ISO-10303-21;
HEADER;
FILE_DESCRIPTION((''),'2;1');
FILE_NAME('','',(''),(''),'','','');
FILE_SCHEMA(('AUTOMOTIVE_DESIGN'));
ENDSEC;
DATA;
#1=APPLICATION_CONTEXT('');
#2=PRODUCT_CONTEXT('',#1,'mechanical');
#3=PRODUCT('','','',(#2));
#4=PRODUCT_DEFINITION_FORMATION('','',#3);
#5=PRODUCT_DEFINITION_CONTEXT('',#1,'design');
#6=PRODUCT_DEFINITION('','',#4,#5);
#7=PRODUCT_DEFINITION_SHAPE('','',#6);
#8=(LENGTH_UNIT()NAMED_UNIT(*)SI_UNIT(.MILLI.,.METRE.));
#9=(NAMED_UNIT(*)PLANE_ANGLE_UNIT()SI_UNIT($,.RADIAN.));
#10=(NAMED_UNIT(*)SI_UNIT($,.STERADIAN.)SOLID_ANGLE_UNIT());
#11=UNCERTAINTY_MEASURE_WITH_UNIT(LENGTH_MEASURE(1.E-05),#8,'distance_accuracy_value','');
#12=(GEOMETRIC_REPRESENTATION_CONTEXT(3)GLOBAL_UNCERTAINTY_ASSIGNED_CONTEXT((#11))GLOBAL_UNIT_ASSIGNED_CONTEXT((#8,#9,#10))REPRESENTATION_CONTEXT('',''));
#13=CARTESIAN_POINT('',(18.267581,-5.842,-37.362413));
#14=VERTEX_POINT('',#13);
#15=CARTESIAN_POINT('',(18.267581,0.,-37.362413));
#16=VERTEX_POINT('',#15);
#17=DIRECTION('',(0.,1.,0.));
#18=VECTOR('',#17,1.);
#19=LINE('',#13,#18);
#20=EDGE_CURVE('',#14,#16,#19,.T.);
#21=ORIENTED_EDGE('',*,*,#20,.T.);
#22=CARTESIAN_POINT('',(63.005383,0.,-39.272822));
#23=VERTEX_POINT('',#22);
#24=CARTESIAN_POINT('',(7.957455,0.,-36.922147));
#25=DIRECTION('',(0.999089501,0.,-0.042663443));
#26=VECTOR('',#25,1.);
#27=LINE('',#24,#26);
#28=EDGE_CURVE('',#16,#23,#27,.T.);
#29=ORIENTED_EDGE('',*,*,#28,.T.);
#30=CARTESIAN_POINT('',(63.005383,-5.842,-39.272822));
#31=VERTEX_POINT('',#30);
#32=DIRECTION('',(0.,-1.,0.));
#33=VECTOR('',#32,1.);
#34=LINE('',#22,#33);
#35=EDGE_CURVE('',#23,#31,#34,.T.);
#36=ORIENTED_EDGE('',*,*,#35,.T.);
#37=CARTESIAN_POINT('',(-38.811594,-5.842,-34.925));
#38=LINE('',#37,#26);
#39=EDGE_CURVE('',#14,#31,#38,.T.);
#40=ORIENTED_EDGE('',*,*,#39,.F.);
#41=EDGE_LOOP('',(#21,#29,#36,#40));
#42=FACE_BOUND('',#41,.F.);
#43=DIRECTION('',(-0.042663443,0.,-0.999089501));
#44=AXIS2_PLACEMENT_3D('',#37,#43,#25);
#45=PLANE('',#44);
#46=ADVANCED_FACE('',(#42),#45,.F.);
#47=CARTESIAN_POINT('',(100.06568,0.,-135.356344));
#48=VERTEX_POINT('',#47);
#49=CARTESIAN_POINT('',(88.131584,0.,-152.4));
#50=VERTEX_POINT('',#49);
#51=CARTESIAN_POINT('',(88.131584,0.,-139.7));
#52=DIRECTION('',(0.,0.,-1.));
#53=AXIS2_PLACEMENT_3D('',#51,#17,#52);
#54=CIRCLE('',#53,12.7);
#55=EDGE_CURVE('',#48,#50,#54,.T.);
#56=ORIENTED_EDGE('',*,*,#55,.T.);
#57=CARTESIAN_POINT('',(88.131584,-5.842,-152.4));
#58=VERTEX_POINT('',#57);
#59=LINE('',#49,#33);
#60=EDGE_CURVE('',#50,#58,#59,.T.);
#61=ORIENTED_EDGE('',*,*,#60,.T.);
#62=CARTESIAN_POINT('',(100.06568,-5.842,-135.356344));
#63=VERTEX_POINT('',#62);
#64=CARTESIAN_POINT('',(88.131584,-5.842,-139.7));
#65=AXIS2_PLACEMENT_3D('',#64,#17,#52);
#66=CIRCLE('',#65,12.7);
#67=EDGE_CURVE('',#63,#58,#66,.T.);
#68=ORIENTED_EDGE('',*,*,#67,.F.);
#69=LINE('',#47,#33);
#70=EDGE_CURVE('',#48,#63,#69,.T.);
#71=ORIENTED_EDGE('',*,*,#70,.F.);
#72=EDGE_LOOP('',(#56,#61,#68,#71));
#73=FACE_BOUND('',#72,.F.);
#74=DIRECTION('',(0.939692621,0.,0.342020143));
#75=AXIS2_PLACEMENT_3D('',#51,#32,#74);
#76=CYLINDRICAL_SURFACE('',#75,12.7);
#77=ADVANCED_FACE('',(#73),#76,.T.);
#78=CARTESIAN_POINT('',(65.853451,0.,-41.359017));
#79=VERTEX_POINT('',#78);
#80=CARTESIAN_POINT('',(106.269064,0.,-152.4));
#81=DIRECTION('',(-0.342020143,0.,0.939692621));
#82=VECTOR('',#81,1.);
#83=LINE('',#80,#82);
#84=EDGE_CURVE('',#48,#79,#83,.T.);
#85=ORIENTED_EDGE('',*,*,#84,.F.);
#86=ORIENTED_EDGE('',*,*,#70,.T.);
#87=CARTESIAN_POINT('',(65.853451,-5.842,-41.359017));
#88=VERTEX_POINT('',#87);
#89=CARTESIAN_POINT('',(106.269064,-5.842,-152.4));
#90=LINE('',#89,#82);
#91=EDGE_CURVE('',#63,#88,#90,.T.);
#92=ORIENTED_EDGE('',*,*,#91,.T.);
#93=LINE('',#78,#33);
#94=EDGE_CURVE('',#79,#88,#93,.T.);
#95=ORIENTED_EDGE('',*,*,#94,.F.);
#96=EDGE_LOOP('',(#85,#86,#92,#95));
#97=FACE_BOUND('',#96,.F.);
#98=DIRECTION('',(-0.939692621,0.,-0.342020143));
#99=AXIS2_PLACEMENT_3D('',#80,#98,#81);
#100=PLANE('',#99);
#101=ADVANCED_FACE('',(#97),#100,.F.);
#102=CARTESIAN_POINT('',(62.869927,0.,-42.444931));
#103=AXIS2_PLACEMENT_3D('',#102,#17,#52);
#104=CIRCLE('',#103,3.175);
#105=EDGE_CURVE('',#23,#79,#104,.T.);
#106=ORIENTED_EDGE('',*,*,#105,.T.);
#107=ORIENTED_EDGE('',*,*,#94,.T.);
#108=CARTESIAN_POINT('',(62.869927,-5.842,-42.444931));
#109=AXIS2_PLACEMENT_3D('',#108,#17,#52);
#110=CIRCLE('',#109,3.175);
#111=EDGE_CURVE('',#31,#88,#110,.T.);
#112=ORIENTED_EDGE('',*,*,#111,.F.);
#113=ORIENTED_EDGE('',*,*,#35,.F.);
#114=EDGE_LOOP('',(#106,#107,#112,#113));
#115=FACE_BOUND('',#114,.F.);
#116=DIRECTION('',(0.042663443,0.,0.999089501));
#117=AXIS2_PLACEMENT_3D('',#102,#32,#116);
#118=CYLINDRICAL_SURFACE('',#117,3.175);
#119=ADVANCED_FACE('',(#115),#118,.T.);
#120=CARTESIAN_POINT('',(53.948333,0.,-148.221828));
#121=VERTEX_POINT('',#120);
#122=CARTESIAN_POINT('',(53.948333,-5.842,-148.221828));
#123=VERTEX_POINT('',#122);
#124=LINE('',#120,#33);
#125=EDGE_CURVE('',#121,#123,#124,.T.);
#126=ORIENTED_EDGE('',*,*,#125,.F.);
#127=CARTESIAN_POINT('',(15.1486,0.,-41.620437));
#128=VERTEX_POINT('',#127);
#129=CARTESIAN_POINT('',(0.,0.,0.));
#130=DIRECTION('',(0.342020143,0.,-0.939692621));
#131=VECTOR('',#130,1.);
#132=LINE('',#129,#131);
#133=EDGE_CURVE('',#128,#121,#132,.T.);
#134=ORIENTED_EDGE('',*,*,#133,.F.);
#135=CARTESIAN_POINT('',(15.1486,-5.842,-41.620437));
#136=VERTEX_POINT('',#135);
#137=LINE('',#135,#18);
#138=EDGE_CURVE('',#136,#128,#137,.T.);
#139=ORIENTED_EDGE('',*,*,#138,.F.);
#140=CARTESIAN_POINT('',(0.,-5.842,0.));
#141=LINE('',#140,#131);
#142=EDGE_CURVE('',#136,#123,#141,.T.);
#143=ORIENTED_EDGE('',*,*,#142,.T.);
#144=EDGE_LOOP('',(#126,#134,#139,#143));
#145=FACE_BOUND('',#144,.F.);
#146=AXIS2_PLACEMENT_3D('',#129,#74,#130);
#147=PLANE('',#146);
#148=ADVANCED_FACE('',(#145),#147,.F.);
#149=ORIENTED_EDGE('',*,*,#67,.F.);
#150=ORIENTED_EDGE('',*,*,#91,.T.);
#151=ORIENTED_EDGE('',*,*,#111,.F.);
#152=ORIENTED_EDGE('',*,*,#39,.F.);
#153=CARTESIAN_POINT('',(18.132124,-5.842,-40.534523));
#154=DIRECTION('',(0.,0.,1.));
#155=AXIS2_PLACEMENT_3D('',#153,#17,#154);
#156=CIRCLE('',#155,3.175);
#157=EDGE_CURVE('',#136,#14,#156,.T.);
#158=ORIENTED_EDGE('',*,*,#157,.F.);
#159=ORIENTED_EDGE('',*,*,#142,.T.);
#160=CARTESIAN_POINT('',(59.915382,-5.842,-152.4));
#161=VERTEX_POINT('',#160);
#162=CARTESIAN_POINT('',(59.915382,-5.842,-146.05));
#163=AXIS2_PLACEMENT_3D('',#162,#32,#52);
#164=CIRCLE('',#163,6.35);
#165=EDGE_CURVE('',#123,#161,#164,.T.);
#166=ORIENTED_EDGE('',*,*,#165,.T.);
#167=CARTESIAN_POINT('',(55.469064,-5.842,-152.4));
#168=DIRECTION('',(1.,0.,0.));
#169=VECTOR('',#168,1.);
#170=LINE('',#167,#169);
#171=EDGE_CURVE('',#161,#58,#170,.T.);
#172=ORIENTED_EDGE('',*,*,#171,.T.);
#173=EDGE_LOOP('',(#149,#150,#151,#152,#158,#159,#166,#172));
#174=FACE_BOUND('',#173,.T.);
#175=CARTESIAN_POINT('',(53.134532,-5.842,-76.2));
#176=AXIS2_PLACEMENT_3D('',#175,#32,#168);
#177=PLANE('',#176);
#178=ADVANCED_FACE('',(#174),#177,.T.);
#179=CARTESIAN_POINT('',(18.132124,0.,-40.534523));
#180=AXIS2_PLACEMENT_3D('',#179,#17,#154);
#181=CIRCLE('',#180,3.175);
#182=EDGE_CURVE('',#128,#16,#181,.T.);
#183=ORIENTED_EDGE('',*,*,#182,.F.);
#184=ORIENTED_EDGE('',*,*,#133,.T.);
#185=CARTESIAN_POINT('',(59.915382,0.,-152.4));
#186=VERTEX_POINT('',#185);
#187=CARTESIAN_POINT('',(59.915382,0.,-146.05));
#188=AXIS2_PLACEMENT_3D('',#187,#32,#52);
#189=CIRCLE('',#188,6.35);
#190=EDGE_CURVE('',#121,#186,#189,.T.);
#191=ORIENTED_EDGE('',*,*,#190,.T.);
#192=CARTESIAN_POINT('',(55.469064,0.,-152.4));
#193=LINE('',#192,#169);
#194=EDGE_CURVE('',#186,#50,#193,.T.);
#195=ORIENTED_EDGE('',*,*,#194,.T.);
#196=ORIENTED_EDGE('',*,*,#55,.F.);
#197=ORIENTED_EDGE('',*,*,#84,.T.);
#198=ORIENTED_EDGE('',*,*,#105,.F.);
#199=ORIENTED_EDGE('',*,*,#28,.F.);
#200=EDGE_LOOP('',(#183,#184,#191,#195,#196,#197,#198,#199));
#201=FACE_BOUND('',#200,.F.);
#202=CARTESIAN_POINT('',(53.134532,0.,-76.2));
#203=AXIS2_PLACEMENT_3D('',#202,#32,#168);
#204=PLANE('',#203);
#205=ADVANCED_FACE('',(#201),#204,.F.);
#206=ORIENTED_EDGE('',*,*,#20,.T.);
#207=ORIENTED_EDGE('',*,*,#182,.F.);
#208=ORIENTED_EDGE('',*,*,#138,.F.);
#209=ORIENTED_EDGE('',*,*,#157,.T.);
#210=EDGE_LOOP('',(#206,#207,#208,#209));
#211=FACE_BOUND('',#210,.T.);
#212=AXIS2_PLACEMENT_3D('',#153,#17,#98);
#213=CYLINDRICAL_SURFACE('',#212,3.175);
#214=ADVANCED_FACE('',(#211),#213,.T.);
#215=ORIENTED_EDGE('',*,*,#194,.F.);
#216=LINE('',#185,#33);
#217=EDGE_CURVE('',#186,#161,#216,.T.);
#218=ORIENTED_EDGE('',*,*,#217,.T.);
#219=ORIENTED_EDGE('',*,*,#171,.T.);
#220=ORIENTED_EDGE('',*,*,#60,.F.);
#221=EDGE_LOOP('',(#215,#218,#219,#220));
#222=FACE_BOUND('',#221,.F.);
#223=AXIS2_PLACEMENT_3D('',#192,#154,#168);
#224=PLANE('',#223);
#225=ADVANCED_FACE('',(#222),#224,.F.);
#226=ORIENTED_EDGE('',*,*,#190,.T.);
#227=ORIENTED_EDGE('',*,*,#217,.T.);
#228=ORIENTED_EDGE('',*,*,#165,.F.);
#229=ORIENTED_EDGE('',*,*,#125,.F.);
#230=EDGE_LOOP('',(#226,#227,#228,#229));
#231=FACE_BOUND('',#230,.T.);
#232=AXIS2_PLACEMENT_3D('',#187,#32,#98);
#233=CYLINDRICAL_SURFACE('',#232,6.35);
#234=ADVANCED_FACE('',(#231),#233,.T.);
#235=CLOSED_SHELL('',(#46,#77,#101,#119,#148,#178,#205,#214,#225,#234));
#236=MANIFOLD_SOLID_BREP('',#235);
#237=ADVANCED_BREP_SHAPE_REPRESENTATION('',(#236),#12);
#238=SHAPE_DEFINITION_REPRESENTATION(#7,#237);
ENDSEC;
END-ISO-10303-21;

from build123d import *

# Parameters (mm, degrees)
F1_DEPTH = 5.842
F2_R     = 6.35
F3_R     = 12.7
F6_DEPTH = 25.4
F7_R     = 3.175


# Not quite as in the source:
# - a length typed as a fraction of an inch, garbled in the dataset ("3 / 203.2 mm" for 3/8 in), is restored


with BuildPart() as f1:
    # F0 (on Front) → F1 (new body)
    with BuildSketch(Plane.XZ):
        Polygon((50.8, 0), (0, 0), (55.4690637022, -152.4), (106.2690637022, -152.4), align=None)
    extrude(amount=F1_DEPTH)

    # F2
    f2_edges = [f1.edges().sort_by_distance(p)[0] for p in [
        (55.469064, -2.921, -152.4),
        (50.8, -2.921, 0),
        (0, -2.921, 0),
    ]]
    fillet(f2_edges, radius=F2_R)

    # F3
    f3_edges = [f1.edges().sort_by_distance(p)[0] for p in [
        (106.269064, -2.921, -152.4),
    ]]
    fillet(f3_edges, radius=F3_R)

    # F5 (on face) → F6 (cut)
    with BuildSketch(Plane.XZ.offset(5.842)):
        Polygon((109.8922565579, 0), (-38.8115942478, 0), (-38.8115942478, -34.925), (109.8922565579, -41.275), align=None)
    extrude(amount=-F6_DEPTH, mode=Mode.SUBTRACT)

    # F7
    f7_edges = [f1.edges().sort_by_distance(p)[0] for p in [
        (65.127115, -2.921, -39.363424),
        (13.525097, -2.921, -37.159898),
    ]]
    fillet(f7_edges, radius=F7_R)


solid = f1.part
